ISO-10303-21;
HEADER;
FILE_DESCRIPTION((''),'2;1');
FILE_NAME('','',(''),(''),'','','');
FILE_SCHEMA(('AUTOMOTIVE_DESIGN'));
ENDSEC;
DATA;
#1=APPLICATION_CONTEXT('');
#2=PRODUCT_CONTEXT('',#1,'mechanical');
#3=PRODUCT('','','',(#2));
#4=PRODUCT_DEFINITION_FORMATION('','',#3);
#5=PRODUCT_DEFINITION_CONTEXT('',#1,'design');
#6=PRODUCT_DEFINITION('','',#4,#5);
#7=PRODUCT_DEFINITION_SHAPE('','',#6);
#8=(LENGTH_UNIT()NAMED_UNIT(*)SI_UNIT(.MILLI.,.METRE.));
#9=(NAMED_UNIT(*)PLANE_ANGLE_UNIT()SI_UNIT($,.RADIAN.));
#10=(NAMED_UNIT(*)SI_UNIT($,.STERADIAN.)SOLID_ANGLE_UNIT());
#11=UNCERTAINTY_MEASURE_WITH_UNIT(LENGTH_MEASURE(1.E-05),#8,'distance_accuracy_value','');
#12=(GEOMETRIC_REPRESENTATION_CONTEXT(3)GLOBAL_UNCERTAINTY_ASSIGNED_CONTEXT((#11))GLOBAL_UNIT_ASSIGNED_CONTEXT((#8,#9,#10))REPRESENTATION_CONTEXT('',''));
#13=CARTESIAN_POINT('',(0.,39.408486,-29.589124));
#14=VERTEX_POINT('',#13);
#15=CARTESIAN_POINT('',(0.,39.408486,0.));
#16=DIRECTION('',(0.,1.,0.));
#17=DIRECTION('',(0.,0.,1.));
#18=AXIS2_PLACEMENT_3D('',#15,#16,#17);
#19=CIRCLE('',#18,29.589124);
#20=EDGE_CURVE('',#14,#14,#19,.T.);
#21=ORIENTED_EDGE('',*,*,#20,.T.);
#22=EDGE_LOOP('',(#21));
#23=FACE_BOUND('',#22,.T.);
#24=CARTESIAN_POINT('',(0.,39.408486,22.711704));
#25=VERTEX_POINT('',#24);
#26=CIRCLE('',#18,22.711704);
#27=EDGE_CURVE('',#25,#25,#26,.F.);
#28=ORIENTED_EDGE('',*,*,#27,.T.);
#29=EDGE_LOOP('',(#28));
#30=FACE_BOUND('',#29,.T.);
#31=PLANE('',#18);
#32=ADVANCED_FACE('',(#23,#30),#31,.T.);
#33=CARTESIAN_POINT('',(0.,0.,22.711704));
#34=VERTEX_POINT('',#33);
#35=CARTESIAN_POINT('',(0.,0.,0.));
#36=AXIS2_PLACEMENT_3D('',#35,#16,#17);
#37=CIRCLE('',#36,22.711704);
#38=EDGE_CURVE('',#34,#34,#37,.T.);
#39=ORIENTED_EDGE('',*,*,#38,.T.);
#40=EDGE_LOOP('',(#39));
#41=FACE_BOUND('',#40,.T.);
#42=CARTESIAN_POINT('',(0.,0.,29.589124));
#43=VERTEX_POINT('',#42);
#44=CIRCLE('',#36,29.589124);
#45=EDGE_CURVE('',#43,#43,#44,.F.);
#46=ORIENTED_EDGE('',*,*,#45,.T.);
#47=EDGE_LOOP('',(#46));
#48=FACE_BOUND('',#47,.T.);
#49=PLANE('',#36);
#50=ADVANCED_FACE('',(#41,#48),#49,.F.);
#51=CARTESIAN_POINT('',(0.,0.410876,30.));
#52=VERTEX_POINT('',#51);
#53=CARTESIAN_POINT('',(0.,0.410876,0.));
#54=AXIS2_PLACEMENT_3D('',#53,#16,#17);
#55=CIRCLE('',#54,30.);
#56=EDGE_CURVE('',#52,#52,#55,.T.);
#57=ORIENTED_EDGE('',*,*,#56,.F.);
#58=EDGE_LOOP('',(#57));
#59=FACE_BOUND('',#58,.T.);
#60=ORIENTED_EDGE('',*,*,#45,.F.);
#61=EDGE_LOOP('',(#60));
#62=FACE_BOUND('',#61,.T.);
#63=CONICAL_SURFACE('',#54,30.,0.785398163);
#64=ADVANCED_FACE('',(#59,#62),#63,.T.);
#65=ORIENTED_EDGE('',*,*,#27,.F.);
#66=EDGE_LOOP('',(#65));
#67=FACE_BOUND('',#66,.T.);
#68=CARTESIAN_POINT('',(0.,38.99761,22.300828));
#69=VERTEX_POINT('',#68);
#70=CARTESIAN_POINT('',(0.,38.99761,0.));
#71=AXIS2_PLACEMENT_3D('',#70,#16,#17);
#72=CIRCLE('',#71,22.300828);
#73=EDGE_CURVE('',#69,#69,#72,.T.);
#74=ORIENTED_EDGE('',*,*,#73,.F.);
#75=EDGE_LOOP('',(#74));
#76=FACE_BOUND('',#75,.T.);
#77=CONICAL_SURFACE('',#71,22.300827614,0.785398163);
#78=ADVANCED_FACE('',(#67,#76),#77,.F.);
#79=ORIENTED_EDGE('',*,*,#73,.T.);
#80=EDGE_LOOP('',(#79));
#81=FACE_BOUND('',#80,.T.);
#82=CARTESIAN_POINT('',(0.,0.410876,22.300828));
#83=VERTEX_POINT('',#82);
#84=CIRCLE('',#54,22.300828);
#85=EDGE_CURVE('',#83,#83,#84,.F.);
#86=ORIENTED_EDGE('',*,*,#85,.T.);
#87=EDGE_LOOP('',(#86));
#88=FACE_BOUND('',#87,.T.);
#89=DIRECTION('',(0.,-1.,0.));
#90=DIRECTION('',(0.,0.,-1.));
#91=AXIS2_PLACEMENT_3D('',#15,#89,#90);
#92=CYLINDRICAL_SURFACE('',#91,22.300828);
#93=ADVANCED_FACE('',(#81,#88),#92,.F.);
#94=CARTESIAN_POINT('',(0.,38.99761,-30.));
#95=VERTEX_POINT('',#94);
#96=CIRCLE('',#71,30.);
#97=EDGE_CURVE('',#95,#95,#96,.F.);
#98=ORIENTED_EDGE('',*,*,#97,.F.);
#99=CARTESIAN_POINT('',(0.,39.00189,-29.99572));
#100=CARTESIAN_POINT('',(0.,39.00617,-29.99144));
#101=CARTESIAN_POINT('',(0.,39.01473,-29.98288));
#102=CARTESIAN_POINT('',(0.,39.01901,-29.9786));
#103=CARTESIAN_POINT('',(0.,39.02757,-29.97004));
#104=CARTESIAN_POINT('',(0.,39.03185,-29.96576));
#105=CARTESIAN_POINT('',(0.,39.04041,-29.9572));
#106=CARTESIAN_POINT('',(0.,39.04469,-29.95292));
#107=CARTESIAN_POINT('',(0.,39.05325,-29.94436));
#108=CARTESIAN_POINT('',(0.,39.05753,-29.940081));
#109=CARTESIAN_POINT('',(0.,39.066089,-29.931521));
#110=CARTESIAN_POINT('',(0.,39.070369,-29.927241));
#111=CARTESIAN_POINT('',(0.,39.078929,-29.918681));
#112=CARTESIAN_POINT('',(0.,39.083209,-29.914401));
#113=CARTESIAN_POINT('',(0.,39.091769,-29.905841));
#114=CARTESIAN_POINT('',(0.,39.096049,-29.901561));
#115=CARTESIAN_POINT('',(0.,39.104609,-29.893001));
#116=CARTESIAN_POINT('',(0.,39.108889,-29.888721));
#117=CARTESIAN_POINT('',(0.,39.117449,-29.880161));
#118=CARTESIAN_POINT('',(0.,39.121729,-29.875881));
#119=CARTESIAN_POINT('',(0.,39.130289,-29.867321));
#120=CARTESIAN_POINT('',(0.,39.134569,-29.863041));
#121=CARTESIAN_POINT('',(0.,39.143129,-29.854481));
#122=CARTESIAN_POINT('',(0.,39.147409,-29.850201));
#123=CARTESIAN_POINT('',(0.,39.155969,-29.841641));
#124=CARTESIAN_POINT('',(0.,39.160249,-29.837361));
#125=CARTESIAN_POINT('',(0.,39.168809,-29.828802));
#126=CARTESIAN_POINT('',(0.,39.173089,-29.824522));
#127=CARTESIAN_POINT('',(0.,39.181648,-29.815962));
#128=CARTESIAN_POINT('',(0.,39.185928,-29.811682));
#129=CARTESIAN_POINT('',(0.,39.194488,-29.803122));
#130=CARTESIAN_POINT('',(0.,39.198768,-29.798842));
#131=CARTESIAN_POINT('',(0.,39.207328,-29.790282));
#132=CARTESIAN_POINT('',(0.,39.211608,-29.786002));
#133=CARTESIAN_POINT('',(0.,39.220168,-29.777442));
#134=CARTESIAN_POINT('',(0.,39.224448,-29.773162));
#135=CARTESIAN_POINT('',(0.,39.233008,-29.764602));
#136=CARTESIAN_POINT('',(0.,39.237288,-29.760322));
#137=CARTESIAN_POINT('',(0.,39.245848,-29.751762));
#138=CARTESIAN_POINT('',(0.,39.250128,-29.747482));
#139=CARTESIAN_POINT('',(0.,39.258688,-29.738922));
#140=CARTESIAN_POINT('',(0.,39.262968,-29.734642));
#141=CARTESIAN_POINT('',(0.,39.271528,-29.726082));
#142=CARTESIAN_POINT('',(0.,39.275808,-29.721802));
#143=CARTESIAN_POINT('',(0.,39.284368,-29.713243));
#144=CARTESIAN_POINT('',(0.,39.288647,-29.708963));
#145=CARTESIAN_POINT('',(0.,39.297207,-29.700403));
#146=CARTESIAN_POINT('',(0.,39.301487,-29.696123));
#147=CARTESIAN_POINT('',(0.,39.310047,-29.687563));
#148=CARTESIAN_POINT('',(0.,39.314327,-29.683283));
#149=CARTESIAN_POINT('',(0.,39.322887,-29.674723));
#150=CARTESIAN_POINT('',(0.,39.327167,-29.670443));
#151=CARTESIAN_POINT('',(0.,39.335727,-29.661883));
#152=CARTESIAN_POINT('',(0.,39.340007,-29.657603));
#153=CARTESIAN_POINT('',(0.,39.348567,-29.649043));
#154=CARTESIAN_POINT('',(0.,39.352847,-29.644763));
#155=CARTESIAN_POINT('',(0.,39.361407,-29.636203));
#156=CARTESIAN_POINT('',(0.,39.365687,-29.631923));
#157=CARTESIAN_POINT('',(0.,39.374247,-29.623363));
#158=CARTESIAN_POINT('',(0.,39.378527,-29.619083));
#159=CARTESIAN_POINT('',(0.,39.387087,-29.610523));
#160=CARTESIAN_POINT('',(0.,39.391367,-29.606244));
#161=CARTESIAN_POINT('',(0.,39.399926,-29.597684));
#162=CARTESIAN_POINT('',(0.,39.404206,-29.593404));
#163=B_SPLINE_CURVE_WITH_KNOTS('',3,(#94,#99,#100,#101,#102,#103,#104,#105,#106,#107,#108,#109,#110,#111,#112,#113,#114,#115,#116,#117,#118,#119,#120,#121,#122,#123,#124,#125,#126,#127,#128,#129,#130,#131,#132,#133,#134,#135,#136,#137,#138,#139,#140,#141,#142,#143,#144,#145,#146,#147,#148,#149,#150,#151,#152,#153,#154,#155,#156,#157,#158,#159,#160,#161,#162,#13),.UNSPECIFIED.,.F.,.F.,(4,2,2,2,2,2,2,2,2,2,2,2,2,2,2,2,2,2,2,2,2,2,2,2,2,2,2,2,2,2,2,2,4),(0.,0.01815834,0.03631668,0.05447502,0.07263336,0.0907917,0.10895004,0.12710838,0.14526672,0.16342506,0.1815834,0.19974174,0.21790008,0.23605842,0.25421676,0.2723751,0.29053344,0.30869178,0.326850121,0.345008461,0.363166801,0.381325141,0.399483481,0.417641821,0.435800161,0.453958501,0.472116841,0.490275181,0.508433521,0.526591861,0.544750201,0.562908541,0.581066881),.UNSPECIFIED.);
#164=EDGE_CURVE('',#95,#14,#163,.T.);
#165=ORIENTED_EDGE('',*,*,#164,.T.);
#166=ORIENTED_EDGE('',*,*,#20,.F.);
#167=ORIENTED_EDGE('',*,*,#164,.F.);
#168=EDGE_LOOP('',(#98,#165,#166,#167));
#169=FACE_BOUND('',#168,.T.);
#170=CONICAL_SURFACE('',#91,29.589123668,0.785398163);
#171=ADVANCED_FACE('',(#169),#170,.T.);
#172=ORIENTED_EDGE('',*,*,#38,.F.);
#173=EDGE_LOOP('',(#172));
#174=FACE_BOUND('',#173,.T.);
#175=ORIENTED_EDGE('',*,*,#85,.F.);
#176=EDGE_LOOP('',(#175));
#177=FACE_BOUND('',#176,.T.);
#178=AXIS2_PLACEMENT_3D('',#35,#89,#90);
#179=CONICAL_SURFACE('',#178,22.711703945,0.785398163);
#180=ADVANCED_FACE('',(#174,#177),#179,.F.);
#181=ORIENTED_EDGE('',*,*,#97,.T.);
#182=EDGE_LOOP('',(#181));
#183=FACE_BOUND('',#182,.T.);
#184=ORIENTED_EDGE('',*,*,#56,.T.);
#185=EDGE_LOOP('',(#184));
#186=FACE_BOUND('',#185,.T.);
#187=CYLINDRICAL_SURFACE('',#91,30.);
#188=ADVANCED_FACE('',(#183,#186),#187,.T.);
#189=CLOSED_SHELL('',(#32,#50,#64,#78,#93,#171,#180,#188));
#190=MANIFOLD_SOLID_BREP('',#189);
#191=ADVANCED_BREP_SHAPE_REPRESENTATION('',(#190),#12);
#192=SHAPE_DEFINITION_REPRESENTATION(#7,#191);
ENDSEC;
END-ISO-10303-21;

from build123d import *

# Parameters (mm, degrees)
SKETCH1_R           = 30
BOSS_EXTRUDE1_DEPTH = 39.408486414
SKETCH2_R           = 22.300827614
CUT_EXTRUDE1_DEPTH  = 58.905343462
CHAMFER1_SIZE       = 0.410876332


with BuildPart() as part:
    # Sketch1 → Boss-Extrude1 (new body)
    with BuildSketch(Plane(origin=(0, 0, 0), x_dir=(1, 0, 0), z_dir=(0, 1, 0))):
        Circle(SKETCH1_R)
    extrude(amount=BOSS_EXTRUDE1_DEPTH)

    # Sketch2 → Cut-Extrude1 (cut, through all)
    with BuildSketch(Plane(origin=(0, 0, 0), x_dir=(1, 0, 0), z_dir=(0, 1, 0))):
        Circle(SKETCH2_R)
    extrude(amount=CUT_EXTRUDE1_DEPTH, mode=Mode.SUBTRACT)

    # Chamfer1
    chamfer1_edges = [part.edges().sort_by_distance(p)[0] for p in [
        (-22.300827614, 39.408486414, 0),
        (-22.300827614, 0, 0),
        (-30, 0, 0),
        (-30, 39.408486414, 0),
    ]]
    chamfer(chamfer1_edges, length=CHAMFER1_SIZE)


solid = part.part
